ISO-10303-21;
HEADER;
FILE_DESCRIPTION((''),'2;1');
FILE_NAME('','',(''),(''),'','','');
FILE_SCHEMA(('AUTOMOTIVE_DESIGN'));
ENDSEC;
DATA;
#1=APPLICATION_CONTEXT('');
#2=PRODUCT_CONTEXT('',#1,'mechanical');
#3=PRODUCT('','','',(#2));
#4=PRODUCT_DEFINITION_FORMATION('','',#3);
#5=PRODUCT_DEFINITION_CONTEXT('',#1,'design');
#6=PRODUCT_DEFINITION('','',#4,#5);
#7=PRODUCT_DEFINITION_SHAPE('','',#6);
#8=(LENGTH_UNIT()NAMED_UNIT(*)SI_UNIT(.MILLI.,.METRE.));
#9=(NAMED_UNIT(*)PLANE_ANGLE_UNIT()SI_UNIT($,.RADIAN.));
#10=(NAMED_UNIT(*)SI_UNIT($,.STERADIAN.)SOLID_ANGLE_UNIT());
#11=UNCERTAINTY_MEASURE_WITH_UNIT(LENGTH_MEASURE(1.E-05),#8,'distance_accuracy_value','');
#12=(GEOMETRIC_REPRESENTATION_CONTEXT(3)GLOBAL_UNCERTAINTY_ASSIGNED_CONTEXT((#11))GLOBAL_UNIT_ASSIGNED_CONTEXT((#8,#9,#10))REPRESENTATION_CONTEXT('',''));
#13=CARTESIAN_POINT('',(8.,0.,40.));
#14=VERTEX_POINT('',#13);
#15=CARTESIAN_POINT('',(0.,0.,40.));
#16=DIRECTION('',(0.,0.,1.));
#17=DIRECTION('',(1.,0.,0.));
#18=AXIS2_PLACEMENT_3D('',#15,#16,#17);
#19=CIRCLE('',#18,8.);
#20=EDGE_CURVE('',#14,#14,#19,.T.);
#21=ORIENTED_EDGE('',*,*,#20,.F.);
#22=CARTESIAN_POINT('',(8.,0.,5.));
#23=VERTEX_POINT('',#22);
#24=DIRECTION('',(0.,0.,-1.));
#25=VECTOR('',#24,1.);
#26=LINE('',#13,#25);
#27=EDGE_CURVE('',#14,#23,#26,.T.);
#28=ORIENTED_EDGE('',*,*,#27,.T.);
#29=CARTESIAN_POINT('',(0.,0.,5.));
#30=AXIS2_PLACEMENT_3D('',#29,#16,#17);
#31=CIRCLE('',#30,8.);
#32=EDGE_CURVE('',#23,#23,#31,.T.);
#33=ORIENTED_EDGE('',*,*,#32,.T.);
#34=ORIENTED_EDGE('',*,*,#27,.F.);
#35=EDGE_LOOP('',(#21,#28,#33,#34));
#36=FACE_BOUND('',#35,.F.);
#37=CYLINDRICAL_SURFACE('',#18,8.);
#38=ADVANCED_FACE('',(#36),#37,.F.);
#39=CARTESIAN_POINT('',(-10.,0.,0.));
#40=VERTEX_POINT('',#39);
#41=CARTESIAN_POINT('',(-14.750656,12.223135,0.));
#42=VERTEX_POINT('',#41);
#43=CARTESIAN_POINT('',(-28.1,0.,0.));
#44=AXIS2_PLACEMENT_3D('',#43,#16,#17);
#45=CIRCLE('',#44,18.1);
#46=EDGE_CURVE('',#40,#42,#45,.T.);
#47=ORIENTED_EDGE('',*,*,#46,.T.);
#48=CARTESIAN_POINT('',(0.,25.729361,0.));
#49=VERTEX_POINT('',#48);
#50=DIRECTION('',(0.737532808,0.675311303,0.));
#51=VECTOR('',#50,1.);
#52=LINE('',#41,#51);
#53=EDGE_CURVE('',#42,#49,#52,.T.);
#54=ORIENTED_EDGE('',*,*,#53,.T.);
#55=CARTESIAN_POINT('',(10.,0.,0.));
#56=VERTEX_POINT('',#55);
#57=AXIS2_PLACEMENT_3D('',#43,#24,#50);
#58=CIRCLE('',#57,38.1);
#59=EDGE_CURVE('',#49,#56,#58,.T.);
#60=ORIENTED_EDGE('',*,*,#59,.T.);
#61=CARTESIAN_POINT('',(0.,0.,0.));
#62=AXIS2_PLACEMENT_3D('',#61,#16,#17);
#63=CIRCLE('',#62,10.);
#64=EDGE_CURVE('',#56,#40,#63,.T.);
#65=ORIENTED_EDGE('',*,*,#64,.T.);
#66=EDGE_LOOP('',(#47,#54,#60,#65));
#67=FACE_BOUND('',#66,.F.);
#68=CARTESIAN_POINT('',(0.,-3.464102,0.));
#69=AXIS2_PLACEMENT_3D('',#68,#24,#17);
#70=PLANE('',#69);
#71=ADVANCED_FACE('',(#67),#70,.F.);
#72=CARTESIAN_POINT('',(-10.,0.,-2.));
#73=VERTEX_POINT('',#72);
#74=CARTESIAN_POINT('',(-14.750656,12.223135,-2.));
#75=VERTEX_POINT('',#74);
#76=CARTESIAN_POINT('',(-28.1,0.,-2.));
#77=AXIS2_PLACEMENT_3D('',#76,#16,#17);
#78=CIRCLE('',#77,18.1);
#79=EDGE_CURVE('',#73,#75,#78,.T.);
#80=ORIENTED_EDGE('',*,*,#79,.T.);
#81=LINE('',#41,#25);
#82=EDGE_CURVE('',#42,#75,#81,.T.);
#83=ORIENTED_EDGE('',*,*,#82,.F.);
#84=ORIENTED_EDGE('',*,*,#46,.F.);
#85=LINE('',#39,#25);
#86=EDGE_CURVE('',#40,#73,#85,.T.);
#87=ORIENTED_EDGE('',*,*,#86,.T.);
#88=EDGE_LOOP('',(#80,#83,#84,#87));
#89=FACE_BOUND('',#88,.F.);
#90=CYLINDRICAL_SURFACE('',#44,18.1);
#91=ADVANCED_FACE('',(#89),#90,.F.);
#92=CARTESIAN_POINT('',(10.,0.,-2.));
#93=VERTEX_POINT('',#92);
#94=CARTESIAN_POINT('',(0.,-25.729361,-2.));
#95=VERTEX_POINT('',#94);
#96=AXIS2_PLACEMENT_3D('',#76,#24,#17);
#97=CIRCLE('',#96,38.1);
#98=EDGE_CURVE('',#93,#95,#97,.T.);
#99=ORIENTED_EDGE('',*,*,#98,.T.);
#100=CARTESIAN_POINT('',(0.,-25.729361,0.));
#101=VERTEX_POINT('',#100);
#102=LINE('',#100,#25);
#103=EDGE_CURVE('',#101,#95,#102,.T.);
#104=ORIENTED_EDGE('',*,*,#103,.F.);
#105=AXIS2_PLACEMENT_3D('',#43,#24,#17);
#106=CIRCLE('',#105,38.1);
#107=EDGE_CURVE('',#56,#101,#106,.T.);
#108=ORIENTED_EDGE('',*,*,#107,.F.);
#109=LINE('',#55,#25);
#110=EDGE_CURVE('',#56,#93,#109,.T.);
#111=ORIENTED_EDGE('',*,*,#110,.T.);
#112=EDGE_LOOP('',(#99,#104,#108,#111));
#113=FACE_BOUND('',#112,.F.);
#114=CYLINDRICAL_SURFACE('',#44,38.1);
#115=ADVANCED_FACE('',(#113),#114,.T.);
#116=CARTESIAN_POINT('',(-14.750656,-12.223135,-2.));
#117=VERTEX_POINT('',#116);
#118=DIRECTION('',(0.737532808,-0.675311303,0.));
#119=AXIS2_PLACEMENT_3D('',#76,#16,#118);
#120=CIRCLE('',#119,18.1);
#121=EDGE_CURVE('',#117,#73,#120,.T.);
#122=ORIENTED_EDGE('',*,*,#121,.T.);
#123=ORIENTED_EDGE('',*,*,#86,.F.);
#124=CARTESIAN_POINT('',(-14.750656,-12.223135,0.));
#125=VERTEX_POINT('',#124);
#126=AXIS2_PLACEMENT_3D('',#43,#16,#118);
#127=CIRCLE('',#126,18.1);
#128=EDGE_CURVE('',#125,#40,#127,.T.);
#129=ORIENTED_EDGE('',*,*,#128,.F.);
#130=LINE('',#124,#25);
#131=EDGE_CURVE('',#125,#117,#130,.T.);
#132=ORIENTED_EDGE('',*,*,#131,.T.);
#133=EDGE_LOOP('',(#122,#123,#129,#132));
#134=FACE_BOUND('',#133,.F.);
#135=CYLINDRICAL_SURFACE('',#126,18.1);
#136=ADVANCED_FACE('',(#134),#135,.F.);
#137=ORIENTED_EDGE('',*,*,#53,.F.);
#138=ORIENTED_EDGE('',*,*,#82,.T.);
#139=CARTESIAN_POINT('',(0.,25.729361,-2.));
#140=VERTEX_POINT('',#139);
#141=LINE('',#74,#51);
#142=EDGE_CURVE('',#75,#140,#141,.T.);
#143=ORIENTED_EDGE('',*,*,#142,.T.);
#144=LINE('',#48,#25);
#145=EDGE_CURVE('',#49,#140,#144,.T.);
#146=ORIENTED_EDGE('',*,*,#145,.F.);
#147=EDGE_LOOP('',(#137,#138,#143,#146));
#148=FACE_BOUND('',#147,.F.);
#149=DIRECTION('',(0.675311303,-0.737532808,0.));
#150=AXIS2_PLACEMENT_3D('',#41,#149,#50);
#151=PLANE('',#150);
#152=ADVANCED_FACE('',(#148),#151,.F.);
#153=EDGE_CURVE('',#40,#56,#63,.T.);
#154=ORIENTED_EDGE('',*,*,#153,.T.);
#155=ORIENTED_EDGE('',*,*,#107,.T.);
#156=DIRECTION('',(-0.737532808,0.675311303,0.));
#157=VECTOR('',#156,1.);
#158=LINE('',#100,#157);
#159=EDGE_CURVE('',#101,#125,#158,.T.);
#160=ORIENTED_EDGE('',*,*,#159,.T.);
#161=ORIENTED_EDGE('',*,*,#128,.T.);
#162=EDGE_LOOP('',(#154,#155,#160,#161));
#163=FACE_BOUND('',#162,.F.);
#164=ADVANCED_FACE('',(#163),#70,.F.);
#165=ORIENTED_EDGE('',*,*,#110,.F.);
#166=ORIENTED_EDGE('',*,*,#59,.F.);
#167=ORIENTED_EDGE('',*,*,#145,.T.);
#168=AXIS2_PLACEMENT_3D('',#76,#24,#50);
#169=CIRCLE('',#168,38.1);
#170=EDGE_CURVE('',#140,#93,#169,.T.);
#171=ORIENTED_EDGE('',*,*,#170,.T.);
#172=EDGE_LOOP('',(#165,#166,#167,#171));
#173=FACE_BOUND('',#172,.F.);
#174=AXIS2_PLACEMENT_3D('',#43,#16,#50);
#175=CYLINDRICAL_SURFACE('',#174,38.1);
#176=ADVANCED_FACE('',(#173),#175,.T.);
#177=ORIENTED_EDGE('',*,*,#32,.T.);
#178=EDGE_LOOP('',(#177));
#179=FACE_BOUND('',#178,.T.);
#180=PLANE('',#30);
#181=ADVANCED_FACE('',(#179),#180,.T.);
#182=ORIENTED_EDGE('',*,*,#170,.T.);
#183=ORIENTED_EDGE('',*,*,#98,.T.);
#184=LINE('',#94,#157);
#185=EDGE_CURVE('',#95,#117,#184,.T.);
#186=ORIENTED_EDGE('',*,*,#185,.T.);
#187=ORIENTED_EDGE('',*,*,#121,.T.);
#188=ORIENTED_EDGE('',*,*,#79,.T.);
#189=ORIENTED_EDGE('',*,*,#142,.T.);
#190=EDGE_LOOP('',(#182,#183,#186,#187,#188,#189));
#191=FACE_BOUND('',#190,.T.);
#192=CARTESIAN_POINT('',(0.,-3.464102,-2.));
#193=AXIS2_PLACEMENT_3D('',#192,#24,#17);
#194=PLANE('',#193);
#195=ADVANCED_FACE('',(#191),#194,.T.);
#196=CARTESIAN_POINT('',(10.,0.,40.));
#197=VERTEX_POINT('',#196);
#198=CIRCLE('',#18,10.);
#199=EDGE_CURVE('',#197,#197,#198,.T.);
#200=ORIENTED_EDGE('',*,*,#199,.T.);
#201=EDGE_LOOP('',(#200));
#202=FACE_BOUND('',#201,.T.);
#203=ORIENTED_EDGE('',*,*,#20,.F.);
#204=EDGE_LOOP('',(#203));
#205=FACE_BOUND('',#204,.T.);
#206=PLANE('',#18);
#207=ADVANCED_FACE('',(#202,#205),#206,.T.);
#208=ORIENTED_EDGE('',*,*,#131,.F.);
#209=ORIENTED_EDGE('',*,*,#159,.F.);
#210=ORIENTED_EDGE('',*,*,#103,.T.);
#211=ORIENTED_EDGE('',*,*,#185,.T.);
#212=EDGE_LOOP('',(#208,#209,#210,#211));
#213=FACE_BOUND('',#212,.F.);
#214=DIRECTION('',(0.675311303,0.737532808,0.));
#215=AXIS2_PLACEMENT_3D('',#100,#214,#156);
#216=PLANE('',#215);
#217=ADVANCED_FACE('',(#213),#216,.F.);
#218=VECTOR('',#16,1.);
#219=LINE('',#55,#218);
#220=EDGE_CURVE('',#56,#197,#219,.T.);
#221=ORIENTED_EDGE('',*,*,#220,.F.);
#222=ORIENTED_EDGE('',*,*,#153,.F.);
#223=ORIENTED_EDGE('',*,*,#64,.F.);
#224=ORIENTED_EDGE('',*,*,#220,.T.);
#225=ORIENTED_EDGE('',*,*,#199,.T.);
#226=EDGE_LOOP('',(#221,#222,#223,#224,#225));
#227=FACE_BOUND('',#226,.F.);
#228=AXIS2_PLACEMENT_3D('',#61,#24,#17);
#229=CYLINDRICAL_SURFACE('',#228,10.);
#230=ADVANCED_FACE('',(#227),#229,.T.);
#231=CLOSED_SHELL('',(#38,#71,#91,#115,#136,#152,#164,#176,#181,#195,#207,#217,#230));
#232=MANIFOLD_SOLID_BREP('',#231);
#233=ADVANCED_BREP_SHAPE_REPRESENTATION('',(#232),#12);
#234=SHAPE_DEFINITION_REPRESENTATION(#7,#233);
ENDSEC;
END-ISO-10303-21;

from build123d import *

# Parameters (mm, degrees)
F0_R     = 10
F1_DEPTH = 40
F2_R     = 8
F3_DEPTH = 35
F5_DEPTH = 2


with BuildPart() as f1:
    # F0 (on Top) → F1 (new body)
    with BuildSketch(Plane.XY):
        Circle(F0_R)
    extrude(amount=F1_DEPTH)

    # F2 (on face) → F3 (cut)
    with BuildSketch(Plane.XY.offset(40)):
        Circle(F2_R)
    extrude(amount=-F3_DEPTH, mode=Mode.SUBTRACT)

    # F4 (on face) → F5 (join)
    with BuildSketch(Plane(origin=(0, 0, 0), x_dir=(1, 0, 0), z_dir=(0, 0, -1))):
        with BuildLine():
            Line((-10, 0), (0, 0))
            Line((0, 0), (10, 0))
            ThreePointArc((10, 0), (0, 10), (-10, 0))
        make_face()
        with BuildLine():
            Line((10, 0), (0, 0))
            Line((0, 0), (-10, 0))
            ThreePointArc((-10, 0), (0, -10), (10, 0))
        make_face()
        with BuildLine():
            ThreePointArc((-10, 0), (0, 10), (10, 0))
            ThreePointArc((10, 0), (7.4121106103, 13.8021737418), (0, 25.7293606605))
            Line((0, 25.7293606605), (-14.750656168, 12.223134592))
            ThreePointArc((-14.750656168, 12.223134592), (-11.2294172691, 6.5569381818), (-10, 0))
        make_face()
        with BuildLine():
            ThreePointArc((0, -25.7293606605), (7.4121106103, -13.8021737418), (10, 0))
            ThreePointArc((10, 0), (0, -10), (-10, 0))
            ThreePointArc((-10, 0), (-11.2294172691, -6.5569381818), (-14.750656168, -12.223134592))
            Line((-14.750656168, -12.223134592), (0, -25.7293606605))
        make_face()
    extrude(amount=F5_DEPTH)


solid = f1.part
